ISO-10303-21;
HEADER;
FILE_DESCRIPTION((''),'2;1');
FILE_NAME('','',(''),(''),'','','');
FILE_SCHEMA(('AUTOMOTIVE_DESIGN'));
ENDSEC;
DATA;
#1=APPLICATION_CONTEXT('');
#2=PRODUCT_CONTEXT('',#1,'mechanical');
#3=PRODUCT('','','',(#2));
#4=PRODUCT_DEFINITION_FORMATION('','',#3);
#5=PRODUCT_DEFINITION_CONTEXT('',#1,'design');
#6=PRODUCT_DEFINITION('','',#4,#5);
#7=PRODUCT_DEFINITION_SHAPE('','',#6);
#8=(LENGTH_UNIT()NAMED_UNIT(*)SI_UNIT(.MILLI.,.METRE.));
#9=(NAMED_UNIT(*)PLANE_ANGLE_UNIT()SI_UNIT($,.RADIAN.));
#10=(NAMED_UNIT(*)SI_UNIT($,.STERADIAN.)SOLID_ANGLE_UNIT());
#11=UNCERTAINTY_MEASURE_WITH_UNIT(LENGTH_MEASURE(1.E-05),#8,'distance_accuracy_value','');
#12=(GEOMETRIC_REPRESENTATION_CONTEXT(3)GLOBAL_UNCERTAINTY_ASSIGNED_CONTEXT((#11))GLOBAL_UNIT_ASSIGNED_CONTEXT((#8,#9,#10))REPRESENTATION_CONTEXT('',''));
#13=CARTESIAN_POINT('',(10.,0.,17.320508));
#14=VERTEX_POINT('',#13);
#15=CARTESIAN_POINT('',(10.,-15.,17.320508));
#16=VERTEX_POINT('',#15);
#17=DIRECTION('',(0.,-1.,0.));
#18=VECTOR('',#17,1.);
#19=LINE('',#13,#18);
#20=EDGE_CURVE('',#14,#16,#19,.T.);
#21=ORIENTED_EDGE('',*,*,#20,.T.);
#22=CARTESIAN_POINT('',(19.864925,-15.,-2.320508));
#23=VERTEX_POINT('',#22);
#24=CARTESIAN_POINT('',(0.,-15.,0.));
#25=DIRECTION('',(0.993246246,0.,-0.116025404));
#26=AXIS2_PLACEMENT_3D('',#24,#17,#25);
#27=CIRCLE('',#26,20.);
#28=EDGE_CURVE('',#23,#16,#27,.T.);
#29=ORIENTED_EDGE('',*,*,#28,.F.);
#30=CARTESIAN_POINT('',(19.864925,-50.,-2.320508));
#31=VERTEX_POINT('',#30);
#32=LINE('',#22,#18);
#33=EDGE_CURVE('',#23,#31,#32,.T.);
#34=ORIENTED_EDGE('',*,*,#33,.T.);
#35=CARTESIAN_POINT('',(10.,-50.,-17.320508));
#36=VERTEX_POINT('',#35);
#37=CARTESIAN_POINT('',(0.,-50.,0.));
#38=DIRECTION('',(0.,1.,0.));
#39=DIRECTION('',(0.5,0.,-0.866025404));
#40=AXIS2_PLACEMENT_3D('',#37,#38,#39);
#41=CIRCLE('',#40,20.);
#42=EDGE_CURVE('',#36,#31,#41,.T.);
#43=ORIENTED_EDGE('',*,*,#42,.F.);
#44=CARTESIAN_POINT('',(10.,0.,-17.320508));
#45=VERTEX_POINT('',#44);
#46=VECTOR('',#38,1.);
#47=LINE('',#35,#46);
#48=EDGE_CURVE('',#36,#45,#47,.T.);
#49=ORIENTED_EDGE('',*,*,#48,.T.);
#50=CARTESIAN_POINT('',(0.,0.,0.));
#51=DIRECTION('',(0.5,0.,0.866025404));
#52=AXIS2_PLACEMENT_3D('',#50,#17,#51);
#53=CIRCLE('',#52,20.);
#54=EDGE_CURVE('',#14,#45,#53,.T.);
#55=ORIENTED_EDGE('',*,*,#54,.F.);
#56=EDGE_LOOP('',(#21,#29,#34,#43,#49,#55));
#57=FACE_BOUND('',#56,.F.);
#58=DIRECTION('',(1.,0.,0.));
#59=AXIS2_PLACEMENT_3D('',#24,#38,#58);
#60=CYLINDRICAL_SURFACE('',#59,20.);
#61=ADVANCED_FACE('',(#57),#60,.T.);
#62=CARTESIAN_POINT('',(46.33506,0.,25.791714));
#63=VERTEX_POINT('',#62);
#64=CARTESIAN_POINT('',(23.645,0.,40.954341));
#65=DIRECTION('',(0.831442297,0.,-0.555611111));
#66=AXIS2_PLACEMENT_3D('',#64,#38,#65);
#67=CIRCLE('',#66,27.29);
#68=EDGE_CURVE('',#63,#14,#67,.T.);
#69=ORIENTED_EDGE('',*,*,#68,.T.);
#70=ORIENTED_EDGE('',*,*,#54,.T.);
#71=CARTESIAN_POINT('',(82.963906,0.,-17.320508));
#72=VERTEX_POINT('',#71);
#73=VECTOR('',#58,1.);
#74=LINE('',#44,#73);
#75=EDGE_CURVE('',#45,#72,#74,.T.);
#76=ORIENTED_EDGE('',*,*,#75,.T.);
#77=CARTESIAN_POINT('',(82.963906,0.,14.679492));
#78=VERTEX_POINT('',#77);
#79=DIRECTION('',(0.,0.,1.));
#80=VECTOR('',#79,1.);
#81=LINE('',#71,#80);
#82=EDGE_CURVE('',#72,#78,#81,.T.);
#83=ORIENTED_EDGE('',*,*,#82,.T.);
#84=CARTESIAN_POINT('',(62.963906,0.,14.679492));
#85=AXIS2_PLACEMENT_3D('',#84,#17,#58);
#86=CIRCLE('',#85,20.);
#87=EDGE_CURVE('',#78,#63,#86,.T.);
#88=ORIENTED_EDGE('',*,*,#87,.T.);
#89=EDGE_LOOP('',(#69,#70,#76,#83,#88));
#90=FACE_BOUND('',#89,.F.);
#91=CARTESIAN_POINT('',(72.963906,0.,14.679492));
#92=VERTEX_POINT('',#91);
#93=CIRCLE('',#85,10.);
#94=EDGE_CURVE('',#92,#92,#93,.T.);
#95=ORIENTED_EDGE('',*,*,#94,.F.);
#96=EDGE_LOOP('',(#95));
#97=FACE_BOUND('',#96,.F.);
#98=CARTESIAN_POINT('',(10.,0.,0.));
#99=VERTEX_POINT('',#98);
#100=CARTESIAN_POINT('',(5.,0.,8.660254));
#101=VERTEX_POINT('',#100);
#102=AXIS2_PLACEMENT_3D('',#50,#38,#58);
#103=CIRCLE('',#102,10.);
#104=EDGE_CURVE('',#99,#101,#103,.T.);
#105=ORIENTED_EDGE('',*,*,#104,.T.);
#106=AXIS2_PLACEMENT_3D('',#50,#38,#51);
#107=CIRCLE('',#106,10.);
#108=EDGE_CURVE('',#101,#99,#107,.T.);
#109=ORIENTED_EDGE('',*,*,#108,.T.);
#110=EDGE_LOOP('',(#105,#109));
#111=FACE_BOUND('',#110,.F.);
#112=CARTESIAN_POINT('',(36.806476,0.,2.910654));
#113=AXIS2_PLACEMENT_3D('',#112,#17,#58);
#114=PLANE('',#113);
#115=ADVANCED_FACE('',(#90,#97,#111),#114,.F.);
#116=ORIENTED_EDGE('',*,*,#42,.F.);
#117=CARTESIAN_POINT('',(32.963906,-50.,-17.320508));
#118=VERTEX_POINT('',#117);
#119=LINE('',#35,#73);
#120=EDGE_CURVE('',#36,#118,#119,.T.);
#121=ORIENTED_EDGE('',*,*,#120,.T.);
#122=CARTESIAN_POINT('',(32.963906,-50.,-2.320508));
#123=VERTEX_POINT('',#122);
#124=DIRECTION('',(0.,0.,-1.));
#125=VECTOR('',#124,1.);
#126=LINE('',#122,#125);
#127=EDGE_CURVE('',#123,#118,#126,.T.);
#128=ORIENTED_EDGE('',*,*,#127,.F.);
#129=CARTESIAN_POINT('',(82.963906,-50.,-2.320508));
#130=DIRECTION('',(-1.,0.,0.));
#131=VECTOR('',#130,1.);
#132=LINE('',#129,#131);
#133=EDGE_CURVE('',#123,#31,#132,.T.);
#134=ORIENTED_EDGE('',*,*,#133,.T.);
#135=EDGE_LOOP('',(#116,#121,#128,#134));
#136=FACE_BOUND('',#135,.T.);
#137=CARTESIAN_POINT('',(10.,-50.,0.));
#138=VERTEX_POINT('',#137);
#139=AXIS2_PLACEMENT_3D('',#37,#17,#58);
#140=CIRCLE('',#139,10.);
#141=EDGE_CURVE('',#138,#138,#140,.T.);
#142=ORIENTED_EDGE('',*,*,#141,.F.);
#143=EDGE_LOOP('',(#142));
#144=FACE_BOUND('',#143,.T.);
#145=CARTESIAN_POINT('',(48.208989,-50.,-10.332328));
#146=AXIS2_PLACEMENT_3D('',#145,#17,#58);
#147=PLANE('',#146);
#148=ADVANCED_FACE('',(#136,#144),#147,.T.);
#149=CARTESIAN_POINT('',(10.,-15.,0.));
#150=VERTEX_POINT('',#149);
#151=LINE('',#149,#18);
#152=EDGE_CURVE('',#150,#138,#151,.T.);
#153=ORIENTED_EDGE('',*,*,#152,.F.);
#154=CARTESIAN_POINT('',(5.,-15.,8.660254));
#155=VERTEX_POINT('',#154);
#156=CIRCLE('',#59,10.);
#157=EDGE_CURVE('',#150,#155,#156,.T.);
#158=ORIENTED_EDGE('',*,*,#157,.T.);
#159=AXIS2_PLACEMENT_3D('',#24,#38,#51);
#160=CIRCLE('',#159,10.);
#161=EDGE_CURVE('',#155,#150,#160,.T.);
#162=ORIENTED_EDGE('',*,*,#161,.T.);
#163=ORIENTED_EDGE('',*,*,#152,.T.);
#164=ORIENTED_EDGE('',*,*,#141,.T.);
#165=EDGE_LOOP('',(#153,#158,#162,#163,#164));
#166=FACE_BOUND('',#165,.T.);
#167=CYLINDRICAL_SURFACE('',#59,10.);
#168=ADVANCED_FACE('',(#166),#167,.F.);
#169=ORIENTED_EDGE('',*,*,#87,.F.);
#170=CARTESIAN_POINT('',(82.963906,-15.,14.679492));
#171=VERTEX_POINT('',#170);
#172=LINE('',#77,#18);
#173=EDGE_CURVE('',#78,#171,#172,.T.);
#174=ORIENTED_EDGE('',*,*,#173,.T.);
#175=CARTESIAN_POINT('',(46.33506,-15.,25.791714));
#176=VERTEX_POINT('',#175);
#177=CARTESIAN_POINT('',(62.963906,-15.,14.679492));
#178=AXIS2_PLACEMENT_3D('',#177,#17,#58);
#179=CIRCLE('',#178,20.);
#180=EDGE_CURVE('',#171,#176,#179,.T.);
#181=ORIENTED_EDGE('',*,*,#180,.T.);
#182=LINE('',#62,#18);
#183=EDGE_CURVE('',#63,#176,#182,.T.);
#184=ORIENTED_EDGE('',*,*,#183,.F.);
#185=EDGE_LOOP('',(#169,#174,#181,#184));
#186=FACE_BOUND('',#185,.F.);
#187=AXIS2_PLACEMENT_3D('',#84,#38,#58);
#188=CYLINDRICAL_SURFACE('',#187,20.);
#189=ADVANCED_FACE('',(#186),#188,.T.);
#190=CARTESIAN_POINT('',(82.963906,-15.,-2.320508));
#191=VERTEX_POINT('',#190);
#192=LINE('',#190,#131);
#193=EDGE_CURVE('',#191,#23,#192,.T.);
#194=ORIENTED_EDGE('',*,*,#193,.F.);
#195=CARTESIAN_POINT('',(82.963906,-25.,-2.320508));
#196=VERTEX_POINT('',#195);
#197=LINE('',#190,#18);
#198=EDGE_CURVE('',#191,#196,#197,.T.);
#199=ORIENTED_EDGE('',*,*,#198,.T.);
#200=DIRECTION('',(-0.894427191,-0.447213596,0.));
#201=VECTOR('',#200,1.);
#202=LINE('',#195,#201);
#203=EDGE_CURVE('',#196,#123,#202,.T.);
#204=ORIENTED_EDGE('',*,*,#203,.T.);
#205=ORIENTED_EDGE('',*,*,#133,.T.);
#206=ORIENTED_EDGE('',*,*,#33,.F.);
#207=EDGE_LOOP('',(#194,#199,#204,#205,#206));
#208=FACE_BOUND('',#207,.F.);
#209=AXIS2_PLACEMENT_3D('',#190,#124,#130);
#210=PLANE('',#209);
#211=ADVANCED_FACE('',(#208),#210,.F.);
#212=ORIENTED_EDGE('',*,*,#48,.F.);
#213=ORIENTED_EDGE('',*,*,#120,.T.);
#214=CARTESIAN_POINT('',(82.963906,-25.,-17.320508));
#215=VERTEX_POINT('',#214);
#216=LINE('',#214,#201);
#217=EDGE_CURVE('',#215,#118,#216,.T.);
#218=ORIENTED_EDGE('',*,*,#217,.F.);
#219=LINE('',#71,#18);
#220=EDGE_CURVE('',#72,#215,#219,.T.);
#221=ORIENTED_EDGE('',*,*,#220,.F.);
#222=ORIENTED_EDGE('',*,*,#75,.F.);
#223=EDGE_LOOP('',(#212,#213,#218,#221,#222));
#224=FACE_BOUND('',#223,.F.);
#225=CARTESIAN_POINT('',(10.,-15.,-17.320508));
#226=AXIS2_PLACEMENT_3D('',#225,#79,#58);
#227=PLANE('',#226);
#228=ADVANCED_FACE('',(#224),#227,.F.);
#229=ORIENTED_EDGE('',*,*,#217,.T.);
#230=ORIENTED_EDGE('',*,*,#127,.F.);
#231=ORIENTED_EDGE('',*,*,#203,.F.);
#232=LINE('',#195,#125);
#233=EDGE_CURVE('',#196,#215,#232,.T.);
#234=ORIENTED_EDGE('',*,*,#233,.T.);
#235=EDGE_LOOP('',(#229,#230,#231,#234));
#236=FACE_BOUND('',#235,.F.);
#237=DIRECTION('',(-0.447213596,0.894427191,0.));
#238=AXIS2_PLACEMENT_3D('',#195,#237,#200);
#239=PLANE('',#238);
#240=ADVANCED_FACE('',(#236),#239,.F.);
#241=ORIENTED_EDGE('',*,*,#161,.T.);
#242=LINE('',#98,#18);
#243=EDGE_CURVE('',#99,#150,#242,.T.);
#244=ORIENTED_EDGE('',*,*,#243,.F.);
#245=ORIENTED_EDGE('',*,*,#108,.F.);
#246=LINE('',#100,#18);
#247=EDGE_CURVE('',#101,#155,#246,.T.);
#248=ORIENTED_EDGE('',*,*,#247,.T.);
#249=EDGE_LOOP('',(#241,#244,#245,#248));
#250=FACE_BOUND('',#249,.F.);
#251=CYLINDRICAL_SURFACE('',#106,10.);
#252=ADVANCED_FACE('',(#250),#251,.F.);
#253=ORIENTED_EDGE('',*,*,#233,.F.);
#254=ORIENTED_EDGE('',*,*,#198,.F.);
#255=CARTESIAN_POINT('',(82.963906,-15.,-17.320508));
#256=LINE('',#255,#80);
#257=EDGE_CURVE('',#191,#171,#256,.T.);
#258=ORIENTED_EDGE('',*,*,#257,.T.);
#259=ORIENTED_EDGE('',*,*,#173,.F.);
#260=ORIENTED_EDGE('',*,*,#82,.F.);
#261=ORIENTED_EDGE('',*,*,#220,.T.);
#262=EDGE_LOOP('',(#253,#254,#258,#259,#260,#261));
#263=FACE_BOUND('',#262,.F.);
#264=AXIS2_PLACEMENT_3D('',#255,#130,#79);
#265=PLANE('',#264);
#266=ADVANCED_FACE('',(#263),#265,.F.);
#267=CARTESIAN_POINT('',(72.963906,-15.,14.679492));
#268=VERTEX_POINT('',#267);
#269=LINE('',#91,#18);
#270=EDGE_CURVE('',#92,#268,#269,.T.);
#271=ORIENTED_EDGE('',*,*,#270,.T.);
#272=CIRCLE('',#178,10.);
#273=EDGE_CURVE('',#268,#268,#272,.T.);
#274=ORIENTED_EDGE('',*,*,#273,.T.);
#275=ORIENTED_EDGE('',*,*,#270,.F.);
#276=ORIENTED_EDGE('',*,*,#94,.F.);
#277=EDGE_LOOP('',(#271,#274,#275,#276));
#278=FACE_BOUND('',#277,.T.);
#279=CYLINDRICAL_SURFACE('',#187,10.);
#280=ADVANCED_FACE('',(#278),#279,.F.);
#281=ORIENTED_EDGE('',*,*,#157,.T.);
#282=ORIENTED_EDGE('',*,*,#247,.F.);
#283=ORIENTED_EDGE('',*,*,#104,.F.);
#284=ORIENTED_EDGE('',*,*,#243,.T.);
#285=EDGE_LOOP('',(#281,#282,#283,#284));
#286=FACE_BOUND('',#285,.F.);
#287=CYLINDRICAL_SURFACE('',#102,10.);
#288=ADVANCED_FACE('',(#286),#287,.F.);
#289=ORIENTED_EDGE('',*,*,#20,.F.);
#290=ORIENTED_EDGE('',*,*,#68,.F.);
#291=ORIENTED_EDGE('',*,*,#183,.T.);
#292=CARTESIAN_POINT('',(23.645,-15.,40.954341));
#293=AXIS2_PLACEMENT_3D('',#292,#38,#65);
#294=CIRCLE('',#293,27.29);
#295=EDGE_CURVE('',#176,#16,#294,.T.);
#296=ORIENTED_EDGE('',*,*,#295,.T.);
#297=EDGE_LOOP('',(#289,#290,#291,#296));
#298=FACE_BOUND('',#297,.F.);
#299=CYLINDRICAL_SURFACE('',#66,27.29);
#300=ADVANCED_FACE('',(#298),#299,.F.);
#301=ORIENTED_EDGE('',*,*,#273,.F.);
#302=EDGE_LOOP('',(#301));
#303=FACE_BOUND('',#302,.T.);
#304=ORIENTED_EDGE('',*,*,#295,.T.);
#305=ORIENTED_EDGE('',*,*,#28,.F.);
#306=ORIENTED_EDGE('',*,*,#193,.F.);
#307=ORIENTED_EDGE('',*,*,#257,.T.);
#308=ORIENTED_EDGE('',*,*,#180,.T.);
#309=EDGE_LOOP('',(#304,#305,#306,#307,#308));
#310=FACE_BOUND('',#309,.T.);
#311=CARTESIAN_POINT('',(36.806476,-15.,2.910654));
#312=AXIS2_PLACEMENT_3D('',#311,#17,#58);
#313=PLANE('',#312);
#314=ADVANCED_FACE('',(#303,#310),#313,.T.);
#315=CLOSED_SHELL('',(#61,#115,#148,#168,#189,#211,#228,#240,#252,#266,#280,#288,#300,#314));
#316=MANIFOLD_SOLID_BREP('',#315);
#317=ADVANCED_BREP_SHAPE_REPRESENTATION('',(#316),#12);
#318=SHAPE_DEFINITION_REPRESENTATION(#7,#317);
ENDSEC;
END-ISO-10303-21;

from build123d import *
from build123d import SkipClean  # not in build123d's __all__

# Parameters (mm, degrees)
F0_R     = 10
F1_DEPTH = 15
F2_R     = 10
F3_DEPTH = 35
F5_DEPTH = 35
F7_DEPTH = 15


# Not quite as in the source:
# - after a boolean that leaves OpenCascade's solid faulty, fix() repairs it


with BuildPart() as f1:
    # F0 (on Front) → F1 (new body)
    with BuildSketch(Plane.XZ):
        with BuildLine():
            ThreePointArc((46.3350602938, 25.7917141365), (29.8412578998, 14.3770862565), (10, 17.3205080757))
            ThreePointArc((10, 17.3205080757), (-20, 0), (10, -17.3205080757))
            Line((10, -17.3205080757), (82.9639062402, -17.3205080757))
            Line((82.9639062402, -17.3205080757), (82.9639062402, 14.6794919243))
            ThreePointArc((82.9639062402, 14.6794919243), (68.7700702523, 33.818155918), (46.3350602938, 25.7917141365))
        make_face()
        with BuildLine():
            ThreePointArc((5, 8.6602540378), (8.6602540378, 5), (10, 0))
            ThreePointArc((10, 0), (-8.6602540378, -5), (5, 8.6602540378))
        make_face(mode=Mode.SUBTRACT)
        with Locations((62.9639062402, 14.6794919243)):
            Circle(F0_R, mode=Mode.SUBTRACT)
    extrude(amount=F1_DEPTH)

    # F2 (on face) → F3 (join)
    with BuildSketch(Plane.XZ.offset(15)):
        with BuildLine():
            ThreePointArc((10, -17.3205080757), (17.3205080757, -10), (20, 0))
            ThreePointArc((20, 0), (17.3205080757, 10), (10, 17.3205080757))
            ThreePointArc((10, 17.3205080757), (-20, 0), (10, -17.3205080757))
        make_face()
        Circle(F2_R, mode=Mode.SUBTRACT)
    with SkipClean():  # cleaning this boolean's faces spoils the solid; the shape is the same uncleaned
        extrude(amount=F3_DEPTH)

    # F4 (on face) → F5 (join)
    with BuildSketch(Plane.XZ.offset(15)):
        with BuildLine():
            Line((10, -17.3205080757), (82.9639062402, -17.3205080757))
            Line((82.9639062402, -17.3205080757), (82.9639062402, -2.3205080757))
            Line((82.9639062402, -2.3205080757), (19.8649249249, -2.3205080757))
            ThreePointArc((19.8649249249, -2.3205080757), (16.710129718, -10.9896116769), (10, -17.3205080757))
        make_face()
    extrude(amount=F5_DEPTH)

    add(f1.part.fix(), mode=Mode.REPLACE)

    # F6 (on face) → F7 (cut, through all)
    with BuildSketch(Plane.XY.offset(-2.3205080757)):
        Polygon((82.9639062402, -50), (82.9639062402, -25), (32.9639062402, -50), align=None)
    extrude(amount=-F7_DEPTH, mode=Mode.SUBTRACT)


solid = f1.part
